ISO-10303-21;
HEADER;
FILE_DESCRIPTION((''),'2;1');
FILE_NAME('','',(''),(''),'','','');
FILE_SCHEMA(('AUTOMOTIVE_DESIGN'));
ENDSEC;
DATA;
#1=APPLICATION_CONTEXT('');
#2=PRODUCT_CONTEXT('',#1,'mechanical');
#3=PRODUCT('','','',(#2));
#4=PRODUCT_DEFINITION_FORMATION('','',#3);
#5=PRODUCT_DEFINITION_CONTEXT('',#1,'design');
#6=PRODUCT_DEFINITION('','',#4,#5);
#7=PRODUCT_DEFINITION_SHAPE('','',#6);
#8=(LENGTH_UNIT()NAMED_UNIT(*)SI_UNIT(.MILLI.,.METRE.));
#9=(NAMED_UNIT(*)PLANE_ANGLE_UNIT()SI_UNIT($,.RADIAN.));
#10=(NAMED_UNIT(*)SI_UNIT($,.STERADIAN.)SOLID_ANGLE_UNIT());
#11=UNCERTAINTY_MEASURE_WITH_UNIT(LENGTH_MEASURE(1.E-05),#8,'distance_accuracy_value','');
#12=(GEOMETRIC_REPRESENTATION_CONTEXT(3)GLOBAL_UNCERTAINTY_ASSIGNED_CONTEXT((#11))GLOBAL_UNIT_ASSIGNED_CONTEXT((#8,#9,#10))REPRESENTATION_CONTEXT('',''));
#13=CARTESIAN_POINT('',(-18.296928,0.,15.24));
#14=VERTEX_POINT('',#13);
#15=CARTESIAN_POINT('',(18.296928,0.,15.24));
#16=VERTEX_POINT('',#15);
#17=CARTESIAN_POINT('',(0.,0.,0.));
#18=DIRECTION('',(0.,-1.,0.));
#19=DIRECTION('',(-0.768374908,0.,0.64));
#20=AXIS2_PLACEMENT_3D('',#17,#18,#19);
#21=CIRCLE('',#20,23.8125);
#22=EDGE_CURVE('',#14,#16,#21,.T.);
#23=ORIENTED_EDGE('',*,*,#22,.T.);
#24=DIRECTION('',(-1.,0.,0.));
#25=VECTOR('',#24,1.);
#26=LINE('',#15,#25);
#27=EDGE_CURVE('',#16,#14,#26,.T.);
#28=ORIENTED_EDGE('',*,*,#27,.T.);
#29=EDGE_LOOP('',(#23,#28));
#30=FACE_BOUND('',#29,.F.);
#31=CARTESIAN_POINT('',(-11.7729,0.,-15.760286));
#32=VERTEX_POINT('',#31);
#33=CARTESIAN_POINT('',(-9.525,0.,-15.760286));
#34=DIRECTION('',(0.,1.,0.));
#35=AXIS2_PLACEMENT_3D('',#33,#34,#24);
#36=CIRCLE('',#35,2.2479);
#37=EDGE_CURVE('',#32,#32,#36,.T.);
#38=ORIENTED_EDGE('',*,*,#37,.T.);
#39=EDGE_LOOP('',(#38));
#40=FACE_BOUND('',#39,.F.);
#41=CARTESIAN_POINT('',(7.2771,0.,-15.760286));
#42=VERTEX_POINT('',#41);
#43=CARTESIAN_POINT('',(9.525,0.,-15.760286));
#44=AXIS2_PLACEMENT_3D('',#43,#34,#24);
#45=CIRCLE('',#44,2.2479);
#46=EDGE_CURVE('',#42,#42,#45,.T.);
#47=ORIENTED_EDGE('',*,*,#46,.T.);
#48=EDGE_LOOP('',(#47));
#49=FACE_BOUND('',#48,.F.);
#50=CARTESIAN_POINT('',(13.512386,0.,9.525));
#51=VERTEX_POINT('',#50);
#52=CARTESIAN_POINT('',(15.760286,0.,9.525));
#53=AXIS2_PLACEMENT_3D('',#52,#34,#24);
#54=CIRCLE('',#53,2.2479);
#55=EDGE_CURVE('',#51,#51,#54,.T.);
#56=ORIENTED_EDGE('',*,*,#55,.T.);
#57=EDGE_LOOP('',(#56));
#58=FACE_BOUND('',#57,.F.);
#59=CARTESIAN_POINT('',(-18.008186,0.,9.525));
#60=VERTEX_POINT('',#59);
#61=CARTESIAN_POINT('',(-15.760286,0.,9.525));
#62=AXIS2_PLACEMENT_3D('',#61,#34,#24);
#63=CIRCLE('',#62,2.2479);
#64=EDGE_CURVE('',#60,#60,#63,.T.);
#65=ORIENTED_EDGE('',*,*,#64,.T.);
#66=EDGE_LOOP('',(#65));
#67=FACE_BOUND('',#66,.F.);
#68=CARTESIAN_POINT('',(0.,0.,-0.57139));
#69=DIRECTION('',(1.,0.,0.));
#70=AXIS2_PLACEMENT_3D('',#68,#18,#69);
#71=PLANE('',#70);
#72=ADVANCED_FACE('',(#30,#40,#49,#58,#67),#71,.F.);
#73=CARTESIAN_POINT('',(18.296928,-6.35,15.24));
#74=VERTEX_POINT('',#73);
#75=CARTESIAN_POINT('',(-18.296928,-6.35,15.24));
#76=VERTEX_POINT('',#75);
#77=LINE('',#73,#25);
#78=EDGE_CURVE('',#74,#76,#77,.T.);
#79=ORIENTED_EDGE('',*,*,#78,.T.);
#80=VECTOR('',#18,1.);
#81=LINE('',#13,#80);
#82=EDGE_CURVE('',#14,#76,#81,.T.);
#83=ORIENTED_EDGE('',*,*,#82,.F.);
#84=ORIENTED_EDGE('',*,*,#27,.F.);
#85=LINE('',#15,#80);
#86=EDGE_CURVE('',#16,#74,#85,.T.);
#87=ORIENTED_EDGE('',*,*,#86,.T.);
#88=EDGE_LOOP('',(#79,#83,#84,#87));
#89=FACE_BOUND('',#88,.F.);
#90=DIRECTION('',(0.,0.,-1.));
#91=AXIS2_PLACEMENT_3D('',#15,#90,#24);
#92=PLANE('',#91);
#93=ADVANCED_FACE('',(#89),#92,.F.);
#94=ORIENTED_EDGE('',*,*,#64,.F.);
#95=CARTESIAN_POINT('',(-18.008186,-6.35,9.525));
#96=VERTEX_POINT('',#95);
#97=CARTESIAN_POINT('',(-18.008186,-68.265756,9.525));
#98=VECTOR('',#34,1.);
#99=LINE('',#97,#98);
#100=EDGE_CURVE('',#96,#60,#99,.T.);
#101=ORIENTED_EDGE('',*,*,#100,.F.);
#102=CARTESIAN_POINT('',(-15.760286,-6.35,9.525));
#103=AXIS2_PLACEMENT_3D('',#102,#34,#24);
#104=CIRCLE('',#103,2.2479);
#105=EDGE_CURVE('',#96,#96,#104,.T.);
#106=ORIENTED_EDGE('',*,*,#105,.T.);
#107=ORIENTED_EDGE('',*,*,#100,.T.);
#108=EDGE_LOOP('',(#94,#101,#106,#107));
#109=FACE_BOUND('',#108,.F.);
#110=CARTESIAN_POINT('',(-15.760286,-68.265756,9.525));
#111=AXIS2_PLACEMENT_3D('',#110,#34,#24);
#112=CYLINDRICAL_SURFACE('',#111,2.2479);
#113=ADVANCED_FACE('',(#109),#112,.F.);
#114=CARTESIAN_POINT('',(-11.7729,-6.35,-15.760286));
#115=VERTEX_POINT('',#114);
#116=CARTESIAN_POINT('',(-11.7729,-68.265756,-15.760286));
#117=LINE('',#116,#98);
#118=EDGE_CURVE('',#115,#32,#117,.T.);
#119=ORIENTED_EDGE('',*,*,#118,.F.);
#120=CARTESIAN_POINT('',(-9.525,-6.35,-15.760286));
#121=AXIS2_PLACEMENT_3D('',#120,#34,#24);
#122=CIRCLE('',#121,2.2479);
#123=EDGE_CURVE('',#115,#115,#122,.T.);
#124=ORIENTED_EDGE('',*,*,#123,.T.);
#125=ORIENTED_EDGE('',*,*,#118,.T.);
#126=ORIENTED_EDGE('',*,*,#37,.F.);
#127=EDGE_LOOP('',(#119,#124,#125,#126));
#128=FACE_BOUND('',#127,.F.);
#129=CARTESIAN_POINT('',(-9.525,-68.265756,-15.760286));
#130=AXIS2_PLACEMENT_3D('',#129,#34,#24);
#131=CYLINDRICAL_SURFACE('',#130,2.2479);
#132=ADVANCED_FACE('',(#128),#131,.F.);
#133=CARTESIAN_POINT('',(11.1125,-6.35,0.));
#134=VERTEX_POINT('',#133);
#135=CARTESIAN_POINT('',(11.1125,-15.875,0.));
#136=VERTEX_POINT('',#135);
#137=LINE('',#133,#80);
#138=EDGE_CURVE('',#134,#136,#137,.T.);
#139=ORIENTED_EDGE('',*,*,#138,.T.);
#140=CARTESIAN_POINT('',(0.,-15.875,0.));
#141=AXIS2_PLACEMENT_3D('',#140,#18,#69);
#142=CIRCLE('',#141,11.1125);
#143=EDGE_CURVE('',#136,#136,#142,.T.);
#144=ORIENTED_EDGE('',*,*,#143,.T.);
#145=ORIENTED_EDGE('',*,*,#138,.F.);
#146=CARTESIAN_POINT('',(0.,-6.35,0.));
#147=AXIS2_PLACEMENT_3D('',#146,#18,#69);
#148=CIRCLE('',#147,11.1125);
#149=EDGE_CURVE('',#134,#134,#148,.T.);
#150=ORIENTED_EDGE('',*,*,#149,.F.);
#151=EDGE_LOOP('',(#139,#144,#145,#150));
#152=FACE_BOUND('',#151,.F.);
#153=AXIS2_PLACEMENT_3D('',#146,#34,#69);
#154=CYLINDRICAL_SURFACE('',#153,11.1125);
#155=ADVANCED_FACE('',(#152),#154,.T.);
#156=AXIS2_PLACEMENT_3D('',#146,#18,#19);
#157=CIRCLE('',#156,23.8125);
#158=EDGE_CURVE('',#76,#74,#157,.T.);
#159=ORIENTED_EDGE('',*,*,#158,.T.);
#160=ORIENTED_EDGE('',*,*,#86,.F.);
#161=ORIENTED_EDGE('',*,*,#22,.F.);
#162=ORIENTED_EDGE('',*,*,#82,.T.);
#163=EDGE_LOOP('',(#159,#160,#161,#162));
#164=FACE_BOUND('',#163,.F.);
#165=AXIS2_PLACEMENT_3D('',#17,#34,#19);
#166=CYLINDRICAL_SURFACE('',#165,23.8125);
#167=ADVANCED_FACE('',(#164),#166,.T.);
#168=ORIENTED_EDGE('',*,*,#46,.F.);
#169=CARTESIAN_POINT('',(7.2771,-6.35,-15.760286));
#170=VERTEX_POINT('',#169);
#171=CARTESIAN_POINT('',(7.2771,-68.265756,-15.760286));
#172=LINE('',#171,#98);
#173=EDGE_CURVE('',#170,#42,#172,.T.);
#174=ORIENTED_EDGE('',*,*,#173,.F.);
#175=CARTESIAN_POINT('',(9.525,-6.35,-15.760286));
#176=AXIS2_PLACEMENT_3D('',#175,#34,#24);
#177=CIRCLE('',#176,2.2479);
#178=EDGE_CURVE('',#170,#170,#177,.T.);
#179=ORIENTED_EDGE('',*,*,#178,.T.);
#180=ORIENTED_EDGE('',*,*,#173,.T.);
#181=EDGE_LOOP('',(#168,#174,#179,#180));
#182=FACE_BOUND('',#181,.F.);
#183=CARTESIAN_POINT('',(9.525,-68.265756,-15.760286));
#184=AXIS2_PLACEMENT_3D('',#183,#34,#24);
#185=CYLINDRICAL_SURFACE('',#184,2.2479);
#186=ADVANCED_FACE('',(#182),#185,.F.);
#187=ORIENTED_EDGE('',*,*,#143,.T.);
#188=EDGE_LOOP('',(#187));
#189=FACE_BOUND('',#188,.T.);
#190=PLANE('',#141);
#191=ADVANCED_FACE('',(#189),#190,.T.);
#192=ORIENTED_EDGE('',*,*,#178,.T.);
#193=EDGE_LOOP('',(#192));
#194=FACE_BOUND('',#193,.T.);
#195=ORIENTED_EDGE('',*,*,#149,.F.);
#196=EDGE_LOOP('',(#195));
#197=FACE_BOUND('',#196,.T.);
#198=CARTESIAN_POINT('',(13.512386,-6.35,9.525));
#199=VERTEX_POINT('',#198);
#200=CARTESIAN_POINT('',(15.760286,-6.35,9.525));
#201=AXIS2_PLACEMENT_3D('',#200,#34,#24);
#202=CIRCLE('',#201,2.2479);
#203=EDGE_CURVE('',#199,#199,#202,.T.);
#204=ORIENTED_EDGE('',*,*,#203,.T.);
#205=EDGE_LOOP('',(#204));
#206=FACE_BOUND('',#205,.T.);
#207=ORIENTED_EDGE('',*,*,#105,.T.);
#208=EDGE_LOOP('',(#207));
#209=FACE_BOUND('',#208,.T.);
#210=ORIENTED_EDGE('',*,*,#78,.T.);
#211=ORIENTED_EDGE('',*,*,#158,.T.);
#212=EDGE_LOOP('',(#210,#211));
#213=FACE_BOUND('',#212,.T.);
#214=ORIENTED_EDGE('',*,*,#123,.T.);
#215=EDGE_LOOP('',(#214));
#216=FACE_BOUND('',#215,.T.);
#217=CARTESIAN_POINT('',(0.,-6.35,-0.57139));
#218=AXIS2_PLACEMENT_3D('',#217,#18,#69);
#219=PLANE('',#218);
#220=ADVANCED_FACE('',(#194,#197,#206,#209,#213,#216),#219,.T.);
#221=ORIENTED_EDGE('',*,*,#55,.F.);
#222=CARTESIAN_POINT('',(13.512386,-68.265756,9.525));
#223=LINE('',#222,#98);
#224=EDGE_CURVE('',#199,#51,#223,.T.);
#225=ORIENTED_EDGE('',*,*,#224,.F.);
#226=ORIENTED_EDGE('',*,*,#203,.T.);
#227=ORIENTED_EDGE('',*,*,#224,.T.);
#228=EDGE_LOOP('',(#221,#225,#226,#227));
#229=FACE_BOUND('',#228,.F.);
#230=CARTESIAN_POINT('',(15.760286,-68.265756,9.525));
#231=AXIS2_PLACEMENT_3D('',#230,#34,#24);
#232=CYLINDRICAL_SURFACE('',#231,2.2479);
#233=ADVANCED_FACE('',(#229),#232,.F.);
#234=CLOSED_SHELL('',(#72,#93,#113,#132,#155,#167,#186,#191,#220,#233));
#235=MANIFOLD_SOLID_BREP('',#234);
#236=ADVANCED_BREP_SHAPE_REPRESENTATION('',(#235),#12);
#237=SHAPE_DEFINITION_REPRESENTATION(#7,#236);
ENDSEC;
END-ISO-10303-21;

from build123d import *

# Parameters (mm, degrees)
F1_DEPTH = 6.35
F3_D     = 4.4958
F4_R     = 11.1125
F5_DEPTH = 9.525


with BuildPart() as f1:
    # F0 (on Front) → F1 (new body)
    with BuildSketch(Plane.XZ):
        with BuildLine():
            Line((18.2969275085, 15.24), (-18.2969275085, 15.24))
            ThreePointArc((-18.2969275085, 15.24), (0, -23.8125), (18.2969275085, 15.24))
        make_face()
    extrude(amount=F1_DEPTH)

    # F3 (through all)
    with Locations(Plane.XZ.offset(6.35)):
        with Locations((-9.525, -15.7602855304), (-15.7602855304, 9.525), (15.7602855304, 9.525), (9.525, -15.7602855304)):
            Hole(F3_D / 2)

    # F4 (on face) → F5 (join)
    with BuildSketch(Plane.XZ.offset(6.35)):
        Circle(F4_R)
    extrude(amount=F5_DEPTH)


solid = f1.part
